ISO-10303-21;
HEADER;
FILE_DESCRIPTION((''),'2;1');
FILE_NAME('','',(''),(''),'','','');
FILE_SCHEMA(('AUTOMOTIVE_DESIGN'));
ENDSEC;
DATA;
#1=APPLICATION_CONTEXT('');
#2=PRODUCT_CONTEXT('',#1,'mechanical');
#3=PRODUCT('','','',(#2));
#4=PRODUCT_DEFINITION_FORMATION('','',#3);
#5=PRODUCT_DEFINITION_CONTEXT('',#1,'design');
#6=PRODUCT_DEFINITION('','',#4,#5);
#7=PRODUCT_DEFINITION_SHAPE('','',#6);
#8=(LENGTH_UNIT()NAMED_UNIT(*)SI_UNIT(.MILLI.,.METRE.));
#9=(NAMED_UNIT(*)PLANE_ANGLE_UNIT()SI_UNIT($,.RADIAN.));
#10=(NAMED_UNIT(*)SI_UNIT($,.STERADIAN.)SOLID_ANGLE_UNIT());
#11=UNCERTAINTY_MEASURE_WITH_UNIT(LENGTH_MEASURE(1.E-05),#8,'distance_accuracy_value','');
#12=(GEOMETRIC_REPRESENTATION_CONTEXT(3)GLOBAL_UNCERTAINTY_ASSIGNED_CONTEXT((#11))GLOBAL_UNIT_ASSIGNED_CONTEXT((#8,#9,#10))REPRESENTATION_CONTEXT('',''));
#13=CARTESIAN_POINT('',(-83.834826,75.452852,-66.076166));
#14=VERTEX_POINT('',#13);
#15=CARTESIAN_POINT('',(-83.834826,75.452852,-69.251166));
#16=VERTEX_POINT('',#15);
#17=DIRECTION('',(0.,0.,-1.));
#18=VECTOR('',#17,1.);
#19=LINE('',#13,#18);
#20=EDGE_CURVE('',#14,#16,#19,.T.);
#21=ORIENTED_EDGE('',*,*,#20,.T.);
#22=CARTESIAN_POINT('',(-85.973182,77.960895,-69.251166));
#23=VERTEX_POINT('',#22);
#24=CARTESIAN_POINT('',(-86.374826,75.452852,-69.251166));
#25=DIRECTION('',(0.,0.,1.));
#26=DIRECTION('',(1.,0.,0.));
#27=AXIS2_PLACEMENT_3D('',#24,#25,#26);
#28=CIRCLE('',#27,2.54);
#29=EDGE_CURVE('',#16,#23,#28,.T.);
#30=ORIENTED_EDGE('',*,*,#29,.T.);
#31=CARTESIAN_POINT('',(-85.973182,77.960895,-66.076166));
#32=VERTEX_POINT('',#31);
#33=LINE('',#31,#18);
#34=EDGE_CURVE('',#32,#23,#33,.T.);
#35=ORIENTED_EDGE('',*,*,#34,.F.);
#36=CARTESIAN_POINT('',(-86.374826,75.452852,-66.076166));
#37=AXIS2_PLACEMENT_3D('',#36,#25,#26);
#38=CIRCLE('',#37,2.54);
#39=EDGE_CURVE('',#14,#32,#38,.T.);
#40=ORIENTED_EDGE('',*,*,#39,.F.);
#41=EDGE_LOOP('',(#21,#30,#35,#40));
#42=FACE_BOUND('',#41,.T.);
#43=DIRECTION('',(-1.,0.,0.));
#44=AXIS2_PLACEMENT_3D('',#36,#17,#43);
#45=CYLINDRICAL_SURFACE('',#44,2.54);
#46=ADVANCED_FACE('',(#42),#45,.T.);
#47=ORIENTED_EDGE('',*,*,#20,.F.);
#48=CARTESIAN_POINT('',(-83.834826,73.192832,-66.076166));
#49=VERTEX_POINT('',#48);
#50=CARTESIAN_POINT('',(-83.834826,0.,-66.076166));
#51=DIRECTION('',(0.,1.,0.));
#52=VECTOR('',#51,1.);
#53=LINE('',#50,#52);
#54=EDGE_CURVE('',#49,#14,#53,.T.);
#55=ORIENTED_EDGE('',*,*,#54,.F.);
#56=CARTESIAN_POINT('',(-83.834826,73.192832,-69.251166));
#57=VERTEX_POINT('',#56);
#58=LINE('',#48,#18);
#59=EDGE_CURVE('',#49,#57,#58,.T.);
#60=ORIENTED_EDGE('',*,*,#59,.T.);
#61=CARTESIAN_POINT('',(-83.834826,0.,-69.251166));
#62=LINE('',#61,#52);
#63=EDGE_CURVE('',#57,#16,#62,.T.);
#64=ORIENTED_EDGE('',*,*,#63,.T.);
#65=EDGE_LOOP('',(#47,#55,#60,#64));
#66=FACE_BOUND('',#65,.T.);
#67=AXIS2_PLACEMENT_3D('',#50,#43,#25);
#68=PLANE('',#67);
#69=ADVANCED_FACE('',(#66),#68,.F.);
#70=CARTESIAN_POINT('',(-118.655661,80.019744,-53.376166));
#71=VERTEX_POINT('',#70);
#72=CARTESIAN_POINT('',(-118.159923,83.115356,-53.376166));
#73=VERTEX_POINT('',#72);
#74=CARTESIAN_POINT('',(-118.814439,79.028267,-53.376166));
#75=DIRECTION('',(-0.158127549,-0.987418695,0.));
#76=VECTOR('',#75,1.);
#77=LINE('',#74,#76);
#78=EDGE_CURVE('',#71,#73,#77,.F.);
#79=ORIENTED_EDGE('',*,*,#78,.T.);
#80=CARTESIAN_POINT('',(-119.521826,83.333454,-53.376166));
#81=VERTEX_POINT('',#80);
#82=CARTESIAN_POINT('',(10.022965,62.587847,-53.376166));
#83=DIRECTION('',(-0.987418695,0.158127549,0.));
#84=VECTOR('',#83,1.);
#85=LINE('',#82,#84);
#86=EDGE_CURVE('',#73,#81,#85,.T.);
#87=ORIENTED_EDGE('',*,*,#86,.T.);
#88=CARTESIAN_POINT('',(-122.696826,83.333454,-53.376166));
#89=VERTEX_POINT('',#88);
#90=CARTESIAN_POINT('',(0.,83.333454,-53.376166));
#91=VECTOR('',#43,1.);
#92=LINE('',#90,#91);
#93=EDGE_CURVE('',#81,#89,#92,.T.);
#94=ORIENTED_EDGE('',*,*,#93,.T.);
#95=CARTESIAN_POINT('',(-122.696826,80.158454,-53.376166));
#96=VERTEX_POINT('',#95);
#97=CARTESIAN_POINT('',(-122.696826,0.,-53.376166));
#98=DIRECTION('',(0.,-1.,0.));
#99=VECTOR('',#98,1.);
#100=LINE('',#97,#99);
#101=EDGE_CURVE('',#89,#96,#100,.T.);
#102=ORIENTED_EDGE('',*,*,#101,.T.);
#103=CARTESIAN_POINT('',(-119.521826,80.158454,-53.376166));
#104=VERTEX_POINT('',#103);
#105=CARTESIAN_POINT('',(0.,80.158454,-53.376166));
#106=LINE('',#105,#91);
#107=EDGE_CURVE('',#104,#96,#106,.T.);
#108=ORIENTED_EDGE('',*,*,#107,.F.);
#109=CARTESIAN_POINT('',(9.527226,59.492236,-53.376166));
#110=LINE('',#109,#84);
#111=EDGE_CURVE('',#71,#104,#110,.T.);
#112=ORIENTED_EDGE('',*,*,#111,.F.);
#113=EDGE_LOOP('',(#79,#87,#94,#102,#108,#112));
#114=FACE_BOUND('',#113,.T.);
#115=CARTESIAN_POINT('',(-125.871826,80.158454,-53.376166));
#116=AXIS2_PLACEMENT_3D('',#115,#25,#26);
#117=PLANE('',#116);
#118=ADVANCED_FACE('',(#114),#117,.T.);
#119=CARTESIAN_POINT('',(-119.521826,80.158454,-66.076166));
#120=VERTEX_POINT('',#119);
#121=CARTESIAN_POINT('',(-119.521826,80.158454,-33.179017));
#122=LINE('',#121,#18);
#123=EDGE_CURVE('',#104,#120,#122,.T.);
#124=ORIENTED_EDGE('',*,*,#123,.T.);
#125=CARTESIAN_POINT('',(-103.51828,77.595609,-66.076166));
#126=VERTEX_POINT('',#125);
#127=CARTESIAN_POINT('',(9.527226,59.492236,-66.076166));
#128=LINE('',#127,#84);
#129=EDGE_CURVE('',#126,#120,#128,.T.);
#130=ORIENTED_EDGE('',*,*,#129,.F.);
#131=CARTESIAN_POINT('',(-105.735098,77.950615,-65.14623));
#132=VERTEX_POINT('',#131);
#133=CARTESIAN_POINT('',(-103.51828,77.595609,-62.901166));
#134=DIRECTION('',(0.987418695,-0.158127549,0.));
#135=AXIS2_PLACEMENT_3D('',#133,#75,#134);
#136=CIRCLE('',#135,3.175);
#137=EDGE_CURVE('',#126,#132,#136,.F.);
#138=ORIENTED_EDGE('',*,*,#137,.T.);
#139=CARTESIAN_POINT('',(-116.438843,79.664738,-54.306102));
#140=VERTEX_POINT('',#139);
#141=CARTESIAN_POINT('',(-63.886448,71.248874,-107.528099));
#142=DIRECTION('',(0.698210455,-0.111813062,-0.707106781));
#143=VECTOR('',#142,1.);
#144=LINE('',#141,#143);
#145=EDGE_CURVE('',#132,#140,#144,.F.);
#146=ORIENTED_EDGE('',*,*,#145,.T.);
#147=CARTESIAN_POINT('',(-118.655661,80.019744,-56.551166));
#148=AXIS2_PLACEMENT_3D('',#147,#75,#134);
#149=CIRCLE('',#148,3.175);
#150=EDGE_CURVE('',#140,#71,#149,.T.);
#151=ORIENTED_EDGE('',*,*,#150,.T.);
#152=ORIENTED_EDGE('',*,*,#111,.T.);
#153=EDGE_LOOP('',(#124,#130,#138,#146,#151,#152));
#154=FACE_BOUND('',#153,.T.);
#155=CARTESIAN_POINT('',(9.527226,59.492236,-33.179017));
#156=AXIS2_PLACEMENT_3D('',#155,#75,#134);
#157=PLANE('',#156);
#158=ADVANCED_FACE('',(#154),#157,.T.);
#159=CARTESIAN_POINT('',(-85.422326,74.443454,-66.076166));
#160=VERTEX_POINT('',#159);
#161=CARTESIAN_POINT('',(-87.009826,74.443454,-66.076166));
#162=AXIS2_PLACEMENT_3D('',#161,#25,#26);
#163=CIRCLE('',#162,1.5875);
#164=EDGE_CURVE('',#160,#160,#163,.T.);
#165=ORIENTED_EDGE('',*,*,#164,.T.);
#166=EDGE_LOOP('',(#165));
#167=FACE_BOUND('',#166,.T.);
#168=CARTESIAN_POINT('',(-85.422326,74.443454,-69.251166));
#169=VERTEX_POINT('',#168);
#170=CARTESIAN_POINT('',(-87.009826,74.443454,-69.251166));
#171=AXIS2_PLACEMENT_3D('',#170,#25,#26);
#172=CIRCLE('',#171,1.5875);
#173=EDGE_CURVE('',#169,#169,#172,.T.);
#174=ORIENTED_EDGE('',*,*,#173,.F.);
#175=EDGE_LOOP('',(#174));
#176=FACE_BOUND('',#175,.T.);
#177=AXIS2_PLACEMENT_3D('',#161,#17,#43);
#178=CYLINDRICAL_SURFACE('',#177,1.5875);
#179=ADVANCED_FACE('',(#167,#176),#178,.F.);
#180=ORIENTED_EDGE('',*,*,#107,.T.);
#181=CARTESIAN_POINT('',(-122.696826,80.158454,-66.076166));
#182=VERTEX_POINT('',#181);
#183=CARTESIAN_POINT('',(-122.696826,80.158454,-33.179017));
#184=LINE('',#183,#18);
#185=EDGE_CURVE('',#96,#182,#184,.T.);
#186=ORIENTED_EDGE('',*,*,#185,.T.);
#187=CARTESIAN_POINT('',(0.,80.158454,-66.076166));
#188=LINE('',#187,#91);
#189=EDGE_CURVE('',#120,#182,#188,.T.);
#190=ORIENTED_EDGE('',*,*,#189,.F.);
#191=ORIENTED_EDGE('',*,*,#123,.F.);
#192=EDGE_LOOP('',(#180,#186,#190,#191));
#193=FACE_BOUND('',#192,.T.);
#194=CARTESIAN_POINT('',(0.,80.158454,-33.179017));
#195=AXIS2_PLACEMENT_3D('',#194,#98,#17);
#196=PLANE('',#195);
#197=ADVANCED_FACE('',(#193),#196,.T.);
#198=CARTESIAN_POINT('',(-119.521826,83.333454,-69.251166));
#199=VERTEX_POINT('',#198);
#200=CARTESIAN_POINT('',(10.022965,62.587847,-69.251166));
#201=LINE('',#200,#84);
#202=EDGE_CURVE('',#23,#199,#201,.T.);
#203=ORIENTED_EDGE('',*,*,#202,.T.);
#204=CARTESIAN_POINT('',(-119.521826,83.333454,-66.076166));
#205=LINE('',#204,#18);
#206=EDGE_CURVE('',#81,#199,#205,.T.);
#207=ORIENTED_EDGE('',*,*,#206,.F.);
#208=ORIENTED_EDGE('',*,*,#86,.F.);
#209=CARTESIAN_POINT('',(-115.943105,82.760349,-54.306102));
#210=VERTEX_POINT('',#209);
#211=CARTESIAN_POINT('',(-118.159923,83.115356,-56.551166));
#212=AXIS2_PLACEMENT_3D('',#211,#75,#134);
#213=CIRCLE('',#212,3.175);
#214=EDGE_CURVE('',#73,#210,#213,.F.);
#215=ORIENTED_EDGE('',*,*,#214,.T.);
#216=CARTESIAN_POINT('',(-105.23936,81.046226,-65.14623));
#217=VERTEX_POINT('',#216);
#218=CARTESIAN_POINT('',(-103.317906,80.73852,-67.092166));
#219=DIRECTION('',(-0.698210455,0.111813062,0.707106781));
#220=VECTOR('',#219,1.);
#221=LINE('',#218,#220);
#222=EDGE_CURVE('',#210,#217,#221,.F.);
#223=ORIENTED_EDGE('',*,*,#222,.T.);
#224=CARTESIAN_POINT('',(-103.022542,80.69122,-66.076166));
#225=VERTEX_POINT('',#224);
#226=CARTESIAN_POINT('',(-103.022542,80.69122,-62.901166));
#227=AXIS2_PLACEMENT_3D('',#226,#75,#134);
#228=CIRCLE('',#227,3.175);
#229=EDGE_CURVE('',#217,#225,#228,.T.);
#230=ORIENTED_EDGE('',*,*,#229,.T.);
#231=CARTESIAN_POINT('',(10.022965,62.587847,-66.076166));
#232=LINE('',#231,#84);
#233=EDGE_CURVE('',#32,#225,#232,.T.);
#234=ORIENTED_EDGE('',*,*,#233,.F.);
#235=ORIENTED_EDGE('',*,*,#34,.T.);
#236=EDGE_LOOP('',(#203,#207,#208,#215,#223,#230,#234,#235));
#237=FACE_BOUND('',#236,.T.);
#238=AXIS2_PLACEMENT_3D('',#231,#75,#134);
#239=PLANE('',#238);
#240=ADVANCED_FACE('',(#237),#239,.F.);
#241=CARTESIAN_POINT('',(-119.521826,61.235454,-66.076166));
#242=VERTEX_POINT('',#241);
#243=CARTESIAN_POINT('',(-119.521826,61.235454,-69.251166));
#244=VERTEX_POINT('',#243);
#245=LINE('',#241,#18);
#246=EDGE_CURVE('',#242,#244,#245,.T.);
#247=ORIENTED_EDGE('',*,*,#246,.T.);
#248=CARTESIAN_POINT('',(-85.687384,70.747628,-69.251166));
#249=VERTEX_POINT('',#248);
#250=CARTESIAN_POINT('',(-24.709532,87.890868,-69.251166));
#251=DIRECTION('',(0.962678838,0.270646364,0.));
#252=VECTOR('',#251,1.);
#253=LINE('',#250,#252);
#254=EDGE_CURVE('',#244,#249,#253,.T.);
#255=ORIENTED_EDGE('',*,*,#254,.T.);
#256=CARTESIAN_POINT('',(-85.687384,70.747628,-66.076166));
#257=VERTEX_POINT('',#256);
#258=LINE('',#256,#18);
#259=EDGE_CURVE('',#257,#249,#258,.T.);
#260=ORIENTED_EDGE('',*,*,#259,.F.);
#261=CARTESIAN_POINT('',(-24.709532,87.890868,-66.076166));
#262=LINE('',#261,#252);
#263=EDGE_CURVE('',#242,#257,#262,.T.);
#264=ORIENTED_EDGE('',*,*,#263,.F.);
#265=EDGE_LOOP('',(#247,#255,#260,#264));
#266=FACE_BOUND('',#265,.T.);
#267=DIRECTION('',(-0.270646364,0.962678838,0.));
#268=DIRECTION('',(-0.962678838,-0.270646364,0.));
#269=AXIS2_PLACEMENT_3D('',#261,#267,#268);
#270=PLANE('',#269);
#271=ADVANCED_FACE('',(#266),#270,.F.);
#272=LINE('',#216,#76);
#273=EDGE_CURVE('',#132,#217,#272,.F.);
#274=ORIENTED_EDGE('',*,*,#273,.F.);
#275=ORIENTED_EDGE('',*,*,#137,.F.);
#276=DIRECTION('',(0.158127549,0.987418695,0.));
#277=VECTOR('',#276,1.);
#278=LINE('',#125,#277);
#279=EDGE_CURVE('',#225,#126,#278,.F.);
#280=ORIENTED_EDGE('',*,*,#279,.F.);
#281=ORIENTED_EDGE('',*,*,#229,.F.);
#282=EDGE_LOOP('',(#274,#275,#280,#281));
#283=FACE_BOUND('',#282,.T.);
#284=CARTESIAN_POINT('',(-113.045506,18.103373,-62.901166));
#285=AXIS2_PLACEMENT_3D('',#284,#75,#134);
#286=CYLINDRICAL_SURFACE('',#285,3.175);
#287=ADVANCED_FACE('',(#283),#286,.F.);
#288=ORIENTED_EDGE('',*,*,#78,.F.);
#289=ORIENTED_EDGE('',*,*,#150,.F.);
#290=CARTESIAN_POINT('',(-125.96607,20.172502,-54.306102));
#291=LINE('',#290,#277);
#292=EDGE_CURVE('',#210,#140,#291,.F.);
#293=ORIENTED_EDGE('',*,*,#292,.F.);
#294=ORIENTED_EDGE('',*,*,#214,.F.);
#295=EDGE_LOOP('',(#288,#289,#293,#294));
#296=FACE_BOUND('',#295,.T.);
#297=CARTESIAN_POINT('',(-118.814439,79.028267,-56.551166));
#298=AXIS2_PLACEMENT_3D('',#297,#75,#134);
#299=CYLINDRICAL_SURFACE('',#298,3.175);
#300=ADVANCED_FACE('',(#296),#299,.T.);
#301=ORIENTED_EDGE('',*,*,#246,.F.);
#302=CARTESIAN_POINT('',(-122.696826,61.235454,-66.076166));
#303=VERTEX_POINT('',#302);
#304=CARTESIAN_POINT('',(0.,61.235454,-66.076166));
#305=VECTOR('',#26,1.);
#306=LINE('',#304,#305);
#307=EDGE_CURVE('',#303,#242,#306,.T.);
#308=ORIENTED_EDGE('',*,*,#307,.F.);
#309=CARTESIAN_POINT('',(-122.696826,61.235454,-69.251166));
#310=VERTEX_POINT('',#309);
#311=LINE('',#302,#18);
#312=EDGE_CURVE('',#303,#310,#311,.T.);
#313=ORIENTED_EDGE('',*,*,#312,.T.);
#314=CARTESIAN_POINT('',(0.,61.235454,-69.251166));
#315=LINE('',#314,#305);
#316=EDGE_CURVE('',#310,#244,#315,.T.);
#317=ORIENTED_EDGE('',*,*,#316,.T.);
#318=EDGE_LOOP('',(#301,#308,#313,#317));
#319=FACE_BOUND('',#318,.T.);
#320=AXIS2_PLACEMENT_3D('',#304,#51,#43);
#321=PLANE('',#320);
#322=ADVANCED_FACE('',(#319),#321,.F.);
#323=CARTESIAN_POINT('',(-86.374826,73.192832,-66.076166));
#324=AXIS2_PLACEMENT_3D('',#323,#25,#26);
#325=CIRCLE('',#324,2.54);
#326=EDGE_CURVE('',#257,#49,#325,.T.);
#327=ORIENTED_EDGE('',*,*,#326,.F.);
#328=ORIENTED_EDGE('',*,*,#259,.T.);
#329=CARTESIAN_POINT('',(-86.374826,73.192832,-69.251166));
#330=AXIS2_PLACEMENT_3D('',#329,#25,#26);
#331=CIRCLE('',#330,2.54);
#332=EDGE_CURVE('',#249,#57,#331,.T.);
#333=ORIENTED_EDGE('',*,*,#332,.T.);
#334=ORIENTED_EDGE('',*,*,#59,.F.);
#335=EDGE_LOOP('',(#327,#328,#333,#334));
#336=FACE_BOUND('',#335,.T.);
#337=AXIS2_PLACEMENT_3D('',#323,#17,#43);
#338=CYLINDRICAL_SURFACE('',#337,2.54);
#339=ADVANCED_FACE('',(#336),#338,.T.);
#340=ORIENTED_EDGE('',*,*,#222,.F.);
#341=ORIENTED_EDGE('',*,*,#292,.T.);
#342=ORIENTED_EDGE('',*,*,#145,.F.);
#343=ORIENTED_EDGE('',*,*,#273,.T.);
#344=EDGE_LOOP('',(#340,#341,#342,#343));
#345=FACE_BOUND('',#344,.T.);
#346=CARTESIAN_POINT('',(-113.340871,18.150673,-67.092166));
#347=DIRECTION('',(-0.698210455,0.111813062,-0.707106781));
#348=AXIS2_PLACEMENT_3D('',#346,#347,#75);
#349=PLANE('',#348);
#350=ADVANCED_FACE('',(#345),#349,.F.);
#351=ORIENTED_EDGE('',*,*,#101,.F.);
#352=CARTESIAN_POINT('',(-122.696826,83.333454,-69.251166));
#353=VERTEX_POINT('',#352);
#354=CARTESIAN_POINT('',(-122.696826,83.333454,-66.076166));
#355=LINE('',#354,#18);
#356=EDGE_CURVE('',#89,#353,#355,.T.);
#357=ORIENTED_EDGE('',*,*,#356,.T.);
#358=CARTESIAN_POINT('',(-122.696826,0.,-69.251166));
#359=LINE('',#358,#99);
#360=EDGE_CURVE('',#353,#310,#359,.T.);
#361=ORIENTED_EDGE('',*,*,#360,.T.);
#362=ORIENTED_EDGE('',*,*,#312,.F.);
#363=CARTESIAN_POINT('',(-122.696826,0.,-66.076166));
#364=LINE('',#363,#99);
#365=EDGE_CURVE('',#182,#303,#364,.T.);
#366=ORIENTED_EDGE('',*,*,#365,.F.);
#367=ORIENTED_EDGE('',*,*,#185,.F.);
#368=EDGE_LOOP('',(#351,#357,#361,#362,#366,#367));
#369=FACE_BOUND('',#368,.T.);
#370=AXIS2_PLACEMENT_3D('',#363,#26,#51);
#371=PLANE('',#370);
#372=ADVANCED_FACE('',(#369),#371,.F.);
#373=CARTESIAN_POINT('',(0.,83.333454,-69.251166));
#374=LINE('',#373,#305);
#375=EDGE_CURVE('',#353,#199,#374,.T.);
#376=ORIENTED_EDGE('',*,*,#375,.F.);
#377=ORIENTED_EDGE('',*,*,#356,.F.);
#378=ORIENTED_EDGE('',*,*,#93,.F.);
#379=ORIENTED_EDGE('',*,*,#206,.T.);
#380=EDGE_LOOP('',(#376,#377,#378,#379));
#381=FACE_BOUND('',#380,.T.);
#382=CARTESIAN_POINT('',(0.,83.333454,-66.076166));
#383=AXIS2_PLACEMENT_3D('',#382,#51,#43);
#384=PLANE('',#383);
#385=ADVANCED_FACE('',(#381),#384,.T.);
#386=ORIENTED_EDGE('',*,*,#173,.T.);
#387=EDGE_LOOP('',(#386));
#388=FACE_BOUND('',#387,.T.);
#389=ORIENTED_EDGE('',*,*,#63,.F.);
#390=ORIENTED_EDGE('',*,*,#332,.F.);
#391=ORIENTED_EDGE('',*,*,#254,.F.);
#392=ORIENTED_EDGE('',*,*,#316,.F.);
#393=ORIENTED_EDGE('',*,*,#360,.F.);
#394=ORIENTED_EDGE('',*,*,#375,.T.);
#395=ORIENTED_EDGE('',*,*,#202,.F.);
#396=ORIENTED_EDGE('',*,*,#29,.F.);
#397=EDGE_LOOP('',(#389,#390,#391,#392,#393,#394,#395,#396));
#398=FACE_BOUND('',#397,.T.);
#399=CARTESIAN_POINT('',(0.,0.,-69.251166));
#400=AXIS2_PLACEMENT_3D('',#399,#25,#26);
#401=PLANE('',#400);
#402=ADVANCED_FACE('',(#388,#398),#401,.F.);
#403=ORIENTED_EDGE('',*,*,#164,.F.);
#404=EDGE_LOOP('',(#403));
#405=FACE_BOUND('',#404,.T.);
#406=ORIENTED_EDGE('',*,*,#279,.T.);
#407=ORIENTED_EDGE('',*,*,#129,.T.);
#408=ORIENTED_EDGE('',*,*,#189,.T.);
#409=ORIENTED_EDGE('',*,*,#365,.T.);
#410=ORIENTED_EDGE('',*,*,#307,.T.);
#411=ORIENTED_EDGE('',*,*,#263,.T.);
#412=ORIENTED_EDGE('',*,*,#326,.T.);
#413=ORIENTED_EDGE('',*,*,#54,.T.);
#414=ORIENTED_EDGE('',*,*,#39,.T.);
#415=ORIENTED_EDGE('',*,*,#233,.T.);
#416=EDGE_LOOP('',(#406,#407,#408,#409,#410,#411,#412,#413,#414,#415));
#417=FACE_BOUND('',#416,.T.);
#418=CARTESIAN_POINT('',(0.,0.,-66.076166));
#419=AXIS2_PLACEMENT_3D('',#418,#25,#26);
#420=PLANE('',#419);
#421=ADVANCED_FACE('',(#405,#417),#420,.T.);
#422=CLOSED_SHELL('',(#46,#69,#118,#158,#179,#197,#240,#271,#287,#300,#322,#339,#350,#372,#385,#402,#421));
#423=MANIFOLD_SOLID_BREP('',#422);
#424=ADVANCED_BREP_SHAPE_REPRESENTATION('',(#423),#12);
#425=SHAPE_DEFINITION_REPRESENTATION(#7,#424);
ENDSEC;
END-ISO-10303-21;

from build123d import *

# Parameters (mm, degrees)
SKETCH1_R           = 1.5875
BOSS_EXTRUDE1_DEPTH = 3.175
BOSS_EXTRUDE2_DEPTH = 12.7
CHAMFER1_SIZE       = 13.716
FILLET1_R           = 3.175


with BuildPart() as part:
    # Sketch1 → Boss-Extrude1 (new body)
    with BuildSketch(Plane.XY.offset(-69.251165667)):
        with BuildLine():
            Line((-122.696825859, 83.333454018), (-119.521825859, 83.333454018))
            Line((-119.521825859, 83.333454018), (-85.973181885, 77.960895375))
            ThreePointArc((-85.973181885, 77.960895375), (-84.441981363, 77.100793683), (-83.834825859, 75.45285189))
            Line((-83.834825859, 75.45285189), (-83.834825859, 73.192832287))
            ThreePointArc((-83.834825859, 73.192832287), (-84.350263921, 71.658964965), (-85.687384095, 70.747628037))
            Line((-85.687384095, 70.747628037), (-119.521825859, 61.235454018))
            Line((-119.521825859, 61.235454018), (-122.696825859, 61.235454018))
            Line((-122.696825859, 61.235454018), (-122.696825859, 83.333454018))
        make_face()
        with Locations((-87.009825859, 74.443454018)):
            Circle(SKETCH1_R, mode=Mode.SUBTRACT)
    extrude(amount=BOSS_EXTRUDE1_DEPTH)

    # Sketch2 → Boss-Extrude2 (add)
    with BuildSketch(Plane.XY.offset(-66.076165667)):
        Polygon((-103.813644634, 77.642908982), (-103.317906173, 80.738520261), (-119.521825859, 83.333454018), (-122.696825859, 83.333454018), (-122.696825859, 80.158454018), (-119.521825859, 80.158454018), align=None)
    extrude(amount=BOSS_EXTRUDE2_DEPTH)

    # Chamfer1
    # the kernel refuses this chamfer: 13.716 mm, written as the material it takes off along each edge
    with BuildSketch(Plane(origin=(-109.391309905, 42.813488073, -53.376165667), x_dir=(0.02714994258719934, -0.004347855574462481, -0.9996219169112966), z_dir=(0.15812754894268197, 0.987418694508758, 0))) as chamfer1_piece_1_section:
        Polygon((CHAMFER1_SIZE * 0.999621916911, CHAMFER1_SIZE * 0.0274958766106), (-CHAMFER1_SIZE * 0.0274958766106, CHAMFER1_SIZE * 0.999621916911), (0, 0), align=None)
    chamfer1_piece_1 = extrude(amount=73.681462081, mode=Mode.PRIVATE)
    chamfer1_piece_1 = split(chamfer1_piece_1, bisect_by=Plane(origin=(-108.089526316, 79.915158718, -66.076165667), z_dir=(0, 0, 1)), keep=Keep.TOP, mode=Mode.PRIVATE)
    add(chamfer1_piece_1, mode=Mode.SUBTRACT)

    # Fillet1
    fillet1_edges = [part.edges().sort_by_distance(p)[0] for p in [
        (-117.109210218, 81.359592083, -53.376165667),
        (-104.568992798, 79.351372211, -66.076165667),
    ]]
    fillet(fillet1_edges, radius=FILLET1_R)


solid = part.part
